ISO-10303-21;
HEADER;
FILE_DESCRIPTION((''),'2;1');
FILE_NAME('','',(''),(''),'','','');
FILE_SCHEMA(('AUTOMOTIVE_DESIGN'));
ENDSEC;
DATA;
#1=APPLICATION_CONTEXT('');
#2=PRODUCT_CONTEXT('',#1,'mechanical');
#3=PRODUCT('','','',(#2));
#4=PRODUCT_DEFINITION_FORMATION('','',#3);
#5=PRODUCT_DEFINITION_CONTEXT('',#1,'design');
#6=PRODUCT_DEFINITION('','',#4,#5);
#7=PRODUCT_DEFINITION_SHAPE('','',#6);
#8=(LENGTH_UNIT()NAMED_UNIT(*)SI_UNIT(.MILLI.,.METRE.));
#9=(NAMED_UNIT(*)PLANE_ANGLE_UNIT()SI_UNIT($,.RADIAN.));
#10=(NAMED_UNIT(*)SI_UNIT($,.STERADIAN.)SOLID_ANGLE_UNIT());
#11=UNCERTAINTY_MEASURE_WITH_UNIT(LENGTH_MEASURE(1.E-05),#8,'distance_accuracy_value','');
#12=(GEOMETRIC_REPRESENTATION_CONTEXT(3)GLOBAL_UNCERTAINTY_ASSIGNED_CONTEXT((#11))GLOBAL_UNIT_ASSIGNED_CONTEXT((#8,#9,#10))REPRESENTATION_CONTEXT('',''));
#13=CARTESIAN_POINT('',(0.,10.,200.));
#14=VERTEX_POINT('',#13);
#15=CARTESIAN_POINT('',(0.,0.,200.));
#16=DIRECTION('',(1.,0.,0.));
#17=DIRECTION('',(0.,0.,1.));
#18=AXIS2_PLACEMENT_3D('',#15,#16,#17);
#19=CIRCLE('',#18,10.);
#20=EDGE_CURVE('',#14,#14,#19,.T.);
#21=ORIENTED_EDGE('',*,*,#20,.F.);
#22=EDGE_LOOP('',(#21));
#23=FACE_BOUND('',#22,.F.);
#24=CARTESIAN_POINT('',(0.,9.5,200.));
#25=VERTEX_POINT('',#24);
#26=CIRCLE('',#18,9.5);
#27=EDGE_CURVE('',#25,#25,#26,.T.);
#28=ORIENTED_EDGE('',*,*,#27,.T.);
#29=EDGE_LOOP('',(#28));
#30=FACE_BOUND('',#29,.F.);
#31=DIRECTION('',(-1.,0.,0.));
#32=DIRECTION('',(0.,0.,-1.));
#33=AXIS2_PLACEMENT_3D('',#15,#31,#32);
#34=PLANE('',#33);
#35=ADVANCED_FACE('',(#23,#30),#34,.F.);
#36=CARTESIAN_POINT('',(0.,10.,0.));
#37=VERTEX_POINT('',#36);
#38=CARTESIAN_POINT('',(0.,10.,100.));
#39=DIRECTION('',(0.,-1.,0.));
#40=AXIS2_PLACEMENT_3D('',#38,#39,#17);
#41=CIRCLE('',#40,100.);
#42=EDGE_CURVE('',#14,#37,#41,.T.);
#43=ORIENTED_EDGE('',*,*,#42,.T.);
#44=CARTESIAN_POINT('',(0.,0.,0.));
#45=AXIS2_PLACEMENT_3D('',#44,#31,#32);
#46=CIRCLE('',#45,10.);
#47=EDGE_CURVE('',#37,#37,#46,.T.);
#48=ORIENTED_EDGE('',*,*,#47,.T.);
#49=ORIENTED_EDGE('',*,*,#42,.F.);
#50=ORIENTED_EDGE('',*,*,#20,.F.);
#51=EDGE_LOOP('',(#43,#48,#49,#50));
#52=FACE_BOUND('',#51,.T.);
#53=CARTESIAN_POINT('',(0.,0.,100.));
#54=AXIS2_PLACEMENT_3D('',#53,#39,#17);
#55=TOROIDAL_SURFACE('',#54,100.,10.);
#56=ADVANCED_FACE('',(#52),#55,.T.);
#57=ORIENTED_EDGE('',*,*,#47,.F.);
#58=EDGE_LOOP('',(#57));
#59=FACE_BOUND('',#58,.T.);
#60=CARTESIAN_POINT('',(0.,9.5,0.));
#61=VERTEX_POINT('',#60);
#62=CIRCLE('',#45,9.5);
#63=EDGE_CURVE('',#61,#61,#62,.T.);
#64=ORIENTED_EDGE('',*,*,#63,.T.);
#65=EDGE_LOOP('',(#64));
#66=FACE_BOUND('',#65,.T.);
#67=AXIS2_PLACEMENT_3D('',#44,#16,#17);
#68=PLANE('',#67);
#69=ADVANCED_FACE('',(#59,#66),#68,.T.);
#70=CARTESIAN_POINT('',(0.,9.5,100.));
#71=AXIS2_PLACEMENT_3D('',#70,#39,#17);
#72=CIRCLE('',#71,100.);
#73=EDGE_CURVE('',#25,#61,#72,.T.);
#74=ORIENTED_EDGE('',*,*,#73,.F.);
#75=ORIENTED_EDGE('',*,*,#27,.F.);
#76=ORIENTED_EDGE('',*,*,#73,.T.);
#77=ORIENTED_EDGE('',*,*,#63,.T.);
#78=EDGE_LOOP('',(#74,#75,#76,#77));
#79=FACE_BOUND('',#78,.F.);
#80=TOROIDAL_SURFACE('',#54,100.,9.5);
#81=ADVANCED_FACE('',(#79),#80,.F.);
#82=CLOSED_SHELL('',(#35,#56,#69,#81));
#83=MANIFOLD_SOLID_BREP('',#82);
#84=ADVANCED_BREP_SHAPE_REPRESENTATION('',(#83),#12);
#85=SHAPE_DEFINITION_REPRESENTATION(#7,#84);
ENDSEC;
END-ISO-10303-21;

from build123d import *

# Parameters (mm, degrees)
F0_R   = 10
F0_R_2 = 9.5


with BuildPart() as f2:
    # F2: sweep along a path in F1
    with BuildLine(Plane.XZ) as f2_path:
        ThreePointArc((0, 200), (-100, 100), (0, 0))
    # F0 (on Right) → F2 (sweep)
    with BuildSketch(Plane.YZ):
        Circle(F0_R)
        Circle(F0_R_2, mode=Mode.SUBTRACT)
    sweep(path=f2_path.line)


solid = f2.part
